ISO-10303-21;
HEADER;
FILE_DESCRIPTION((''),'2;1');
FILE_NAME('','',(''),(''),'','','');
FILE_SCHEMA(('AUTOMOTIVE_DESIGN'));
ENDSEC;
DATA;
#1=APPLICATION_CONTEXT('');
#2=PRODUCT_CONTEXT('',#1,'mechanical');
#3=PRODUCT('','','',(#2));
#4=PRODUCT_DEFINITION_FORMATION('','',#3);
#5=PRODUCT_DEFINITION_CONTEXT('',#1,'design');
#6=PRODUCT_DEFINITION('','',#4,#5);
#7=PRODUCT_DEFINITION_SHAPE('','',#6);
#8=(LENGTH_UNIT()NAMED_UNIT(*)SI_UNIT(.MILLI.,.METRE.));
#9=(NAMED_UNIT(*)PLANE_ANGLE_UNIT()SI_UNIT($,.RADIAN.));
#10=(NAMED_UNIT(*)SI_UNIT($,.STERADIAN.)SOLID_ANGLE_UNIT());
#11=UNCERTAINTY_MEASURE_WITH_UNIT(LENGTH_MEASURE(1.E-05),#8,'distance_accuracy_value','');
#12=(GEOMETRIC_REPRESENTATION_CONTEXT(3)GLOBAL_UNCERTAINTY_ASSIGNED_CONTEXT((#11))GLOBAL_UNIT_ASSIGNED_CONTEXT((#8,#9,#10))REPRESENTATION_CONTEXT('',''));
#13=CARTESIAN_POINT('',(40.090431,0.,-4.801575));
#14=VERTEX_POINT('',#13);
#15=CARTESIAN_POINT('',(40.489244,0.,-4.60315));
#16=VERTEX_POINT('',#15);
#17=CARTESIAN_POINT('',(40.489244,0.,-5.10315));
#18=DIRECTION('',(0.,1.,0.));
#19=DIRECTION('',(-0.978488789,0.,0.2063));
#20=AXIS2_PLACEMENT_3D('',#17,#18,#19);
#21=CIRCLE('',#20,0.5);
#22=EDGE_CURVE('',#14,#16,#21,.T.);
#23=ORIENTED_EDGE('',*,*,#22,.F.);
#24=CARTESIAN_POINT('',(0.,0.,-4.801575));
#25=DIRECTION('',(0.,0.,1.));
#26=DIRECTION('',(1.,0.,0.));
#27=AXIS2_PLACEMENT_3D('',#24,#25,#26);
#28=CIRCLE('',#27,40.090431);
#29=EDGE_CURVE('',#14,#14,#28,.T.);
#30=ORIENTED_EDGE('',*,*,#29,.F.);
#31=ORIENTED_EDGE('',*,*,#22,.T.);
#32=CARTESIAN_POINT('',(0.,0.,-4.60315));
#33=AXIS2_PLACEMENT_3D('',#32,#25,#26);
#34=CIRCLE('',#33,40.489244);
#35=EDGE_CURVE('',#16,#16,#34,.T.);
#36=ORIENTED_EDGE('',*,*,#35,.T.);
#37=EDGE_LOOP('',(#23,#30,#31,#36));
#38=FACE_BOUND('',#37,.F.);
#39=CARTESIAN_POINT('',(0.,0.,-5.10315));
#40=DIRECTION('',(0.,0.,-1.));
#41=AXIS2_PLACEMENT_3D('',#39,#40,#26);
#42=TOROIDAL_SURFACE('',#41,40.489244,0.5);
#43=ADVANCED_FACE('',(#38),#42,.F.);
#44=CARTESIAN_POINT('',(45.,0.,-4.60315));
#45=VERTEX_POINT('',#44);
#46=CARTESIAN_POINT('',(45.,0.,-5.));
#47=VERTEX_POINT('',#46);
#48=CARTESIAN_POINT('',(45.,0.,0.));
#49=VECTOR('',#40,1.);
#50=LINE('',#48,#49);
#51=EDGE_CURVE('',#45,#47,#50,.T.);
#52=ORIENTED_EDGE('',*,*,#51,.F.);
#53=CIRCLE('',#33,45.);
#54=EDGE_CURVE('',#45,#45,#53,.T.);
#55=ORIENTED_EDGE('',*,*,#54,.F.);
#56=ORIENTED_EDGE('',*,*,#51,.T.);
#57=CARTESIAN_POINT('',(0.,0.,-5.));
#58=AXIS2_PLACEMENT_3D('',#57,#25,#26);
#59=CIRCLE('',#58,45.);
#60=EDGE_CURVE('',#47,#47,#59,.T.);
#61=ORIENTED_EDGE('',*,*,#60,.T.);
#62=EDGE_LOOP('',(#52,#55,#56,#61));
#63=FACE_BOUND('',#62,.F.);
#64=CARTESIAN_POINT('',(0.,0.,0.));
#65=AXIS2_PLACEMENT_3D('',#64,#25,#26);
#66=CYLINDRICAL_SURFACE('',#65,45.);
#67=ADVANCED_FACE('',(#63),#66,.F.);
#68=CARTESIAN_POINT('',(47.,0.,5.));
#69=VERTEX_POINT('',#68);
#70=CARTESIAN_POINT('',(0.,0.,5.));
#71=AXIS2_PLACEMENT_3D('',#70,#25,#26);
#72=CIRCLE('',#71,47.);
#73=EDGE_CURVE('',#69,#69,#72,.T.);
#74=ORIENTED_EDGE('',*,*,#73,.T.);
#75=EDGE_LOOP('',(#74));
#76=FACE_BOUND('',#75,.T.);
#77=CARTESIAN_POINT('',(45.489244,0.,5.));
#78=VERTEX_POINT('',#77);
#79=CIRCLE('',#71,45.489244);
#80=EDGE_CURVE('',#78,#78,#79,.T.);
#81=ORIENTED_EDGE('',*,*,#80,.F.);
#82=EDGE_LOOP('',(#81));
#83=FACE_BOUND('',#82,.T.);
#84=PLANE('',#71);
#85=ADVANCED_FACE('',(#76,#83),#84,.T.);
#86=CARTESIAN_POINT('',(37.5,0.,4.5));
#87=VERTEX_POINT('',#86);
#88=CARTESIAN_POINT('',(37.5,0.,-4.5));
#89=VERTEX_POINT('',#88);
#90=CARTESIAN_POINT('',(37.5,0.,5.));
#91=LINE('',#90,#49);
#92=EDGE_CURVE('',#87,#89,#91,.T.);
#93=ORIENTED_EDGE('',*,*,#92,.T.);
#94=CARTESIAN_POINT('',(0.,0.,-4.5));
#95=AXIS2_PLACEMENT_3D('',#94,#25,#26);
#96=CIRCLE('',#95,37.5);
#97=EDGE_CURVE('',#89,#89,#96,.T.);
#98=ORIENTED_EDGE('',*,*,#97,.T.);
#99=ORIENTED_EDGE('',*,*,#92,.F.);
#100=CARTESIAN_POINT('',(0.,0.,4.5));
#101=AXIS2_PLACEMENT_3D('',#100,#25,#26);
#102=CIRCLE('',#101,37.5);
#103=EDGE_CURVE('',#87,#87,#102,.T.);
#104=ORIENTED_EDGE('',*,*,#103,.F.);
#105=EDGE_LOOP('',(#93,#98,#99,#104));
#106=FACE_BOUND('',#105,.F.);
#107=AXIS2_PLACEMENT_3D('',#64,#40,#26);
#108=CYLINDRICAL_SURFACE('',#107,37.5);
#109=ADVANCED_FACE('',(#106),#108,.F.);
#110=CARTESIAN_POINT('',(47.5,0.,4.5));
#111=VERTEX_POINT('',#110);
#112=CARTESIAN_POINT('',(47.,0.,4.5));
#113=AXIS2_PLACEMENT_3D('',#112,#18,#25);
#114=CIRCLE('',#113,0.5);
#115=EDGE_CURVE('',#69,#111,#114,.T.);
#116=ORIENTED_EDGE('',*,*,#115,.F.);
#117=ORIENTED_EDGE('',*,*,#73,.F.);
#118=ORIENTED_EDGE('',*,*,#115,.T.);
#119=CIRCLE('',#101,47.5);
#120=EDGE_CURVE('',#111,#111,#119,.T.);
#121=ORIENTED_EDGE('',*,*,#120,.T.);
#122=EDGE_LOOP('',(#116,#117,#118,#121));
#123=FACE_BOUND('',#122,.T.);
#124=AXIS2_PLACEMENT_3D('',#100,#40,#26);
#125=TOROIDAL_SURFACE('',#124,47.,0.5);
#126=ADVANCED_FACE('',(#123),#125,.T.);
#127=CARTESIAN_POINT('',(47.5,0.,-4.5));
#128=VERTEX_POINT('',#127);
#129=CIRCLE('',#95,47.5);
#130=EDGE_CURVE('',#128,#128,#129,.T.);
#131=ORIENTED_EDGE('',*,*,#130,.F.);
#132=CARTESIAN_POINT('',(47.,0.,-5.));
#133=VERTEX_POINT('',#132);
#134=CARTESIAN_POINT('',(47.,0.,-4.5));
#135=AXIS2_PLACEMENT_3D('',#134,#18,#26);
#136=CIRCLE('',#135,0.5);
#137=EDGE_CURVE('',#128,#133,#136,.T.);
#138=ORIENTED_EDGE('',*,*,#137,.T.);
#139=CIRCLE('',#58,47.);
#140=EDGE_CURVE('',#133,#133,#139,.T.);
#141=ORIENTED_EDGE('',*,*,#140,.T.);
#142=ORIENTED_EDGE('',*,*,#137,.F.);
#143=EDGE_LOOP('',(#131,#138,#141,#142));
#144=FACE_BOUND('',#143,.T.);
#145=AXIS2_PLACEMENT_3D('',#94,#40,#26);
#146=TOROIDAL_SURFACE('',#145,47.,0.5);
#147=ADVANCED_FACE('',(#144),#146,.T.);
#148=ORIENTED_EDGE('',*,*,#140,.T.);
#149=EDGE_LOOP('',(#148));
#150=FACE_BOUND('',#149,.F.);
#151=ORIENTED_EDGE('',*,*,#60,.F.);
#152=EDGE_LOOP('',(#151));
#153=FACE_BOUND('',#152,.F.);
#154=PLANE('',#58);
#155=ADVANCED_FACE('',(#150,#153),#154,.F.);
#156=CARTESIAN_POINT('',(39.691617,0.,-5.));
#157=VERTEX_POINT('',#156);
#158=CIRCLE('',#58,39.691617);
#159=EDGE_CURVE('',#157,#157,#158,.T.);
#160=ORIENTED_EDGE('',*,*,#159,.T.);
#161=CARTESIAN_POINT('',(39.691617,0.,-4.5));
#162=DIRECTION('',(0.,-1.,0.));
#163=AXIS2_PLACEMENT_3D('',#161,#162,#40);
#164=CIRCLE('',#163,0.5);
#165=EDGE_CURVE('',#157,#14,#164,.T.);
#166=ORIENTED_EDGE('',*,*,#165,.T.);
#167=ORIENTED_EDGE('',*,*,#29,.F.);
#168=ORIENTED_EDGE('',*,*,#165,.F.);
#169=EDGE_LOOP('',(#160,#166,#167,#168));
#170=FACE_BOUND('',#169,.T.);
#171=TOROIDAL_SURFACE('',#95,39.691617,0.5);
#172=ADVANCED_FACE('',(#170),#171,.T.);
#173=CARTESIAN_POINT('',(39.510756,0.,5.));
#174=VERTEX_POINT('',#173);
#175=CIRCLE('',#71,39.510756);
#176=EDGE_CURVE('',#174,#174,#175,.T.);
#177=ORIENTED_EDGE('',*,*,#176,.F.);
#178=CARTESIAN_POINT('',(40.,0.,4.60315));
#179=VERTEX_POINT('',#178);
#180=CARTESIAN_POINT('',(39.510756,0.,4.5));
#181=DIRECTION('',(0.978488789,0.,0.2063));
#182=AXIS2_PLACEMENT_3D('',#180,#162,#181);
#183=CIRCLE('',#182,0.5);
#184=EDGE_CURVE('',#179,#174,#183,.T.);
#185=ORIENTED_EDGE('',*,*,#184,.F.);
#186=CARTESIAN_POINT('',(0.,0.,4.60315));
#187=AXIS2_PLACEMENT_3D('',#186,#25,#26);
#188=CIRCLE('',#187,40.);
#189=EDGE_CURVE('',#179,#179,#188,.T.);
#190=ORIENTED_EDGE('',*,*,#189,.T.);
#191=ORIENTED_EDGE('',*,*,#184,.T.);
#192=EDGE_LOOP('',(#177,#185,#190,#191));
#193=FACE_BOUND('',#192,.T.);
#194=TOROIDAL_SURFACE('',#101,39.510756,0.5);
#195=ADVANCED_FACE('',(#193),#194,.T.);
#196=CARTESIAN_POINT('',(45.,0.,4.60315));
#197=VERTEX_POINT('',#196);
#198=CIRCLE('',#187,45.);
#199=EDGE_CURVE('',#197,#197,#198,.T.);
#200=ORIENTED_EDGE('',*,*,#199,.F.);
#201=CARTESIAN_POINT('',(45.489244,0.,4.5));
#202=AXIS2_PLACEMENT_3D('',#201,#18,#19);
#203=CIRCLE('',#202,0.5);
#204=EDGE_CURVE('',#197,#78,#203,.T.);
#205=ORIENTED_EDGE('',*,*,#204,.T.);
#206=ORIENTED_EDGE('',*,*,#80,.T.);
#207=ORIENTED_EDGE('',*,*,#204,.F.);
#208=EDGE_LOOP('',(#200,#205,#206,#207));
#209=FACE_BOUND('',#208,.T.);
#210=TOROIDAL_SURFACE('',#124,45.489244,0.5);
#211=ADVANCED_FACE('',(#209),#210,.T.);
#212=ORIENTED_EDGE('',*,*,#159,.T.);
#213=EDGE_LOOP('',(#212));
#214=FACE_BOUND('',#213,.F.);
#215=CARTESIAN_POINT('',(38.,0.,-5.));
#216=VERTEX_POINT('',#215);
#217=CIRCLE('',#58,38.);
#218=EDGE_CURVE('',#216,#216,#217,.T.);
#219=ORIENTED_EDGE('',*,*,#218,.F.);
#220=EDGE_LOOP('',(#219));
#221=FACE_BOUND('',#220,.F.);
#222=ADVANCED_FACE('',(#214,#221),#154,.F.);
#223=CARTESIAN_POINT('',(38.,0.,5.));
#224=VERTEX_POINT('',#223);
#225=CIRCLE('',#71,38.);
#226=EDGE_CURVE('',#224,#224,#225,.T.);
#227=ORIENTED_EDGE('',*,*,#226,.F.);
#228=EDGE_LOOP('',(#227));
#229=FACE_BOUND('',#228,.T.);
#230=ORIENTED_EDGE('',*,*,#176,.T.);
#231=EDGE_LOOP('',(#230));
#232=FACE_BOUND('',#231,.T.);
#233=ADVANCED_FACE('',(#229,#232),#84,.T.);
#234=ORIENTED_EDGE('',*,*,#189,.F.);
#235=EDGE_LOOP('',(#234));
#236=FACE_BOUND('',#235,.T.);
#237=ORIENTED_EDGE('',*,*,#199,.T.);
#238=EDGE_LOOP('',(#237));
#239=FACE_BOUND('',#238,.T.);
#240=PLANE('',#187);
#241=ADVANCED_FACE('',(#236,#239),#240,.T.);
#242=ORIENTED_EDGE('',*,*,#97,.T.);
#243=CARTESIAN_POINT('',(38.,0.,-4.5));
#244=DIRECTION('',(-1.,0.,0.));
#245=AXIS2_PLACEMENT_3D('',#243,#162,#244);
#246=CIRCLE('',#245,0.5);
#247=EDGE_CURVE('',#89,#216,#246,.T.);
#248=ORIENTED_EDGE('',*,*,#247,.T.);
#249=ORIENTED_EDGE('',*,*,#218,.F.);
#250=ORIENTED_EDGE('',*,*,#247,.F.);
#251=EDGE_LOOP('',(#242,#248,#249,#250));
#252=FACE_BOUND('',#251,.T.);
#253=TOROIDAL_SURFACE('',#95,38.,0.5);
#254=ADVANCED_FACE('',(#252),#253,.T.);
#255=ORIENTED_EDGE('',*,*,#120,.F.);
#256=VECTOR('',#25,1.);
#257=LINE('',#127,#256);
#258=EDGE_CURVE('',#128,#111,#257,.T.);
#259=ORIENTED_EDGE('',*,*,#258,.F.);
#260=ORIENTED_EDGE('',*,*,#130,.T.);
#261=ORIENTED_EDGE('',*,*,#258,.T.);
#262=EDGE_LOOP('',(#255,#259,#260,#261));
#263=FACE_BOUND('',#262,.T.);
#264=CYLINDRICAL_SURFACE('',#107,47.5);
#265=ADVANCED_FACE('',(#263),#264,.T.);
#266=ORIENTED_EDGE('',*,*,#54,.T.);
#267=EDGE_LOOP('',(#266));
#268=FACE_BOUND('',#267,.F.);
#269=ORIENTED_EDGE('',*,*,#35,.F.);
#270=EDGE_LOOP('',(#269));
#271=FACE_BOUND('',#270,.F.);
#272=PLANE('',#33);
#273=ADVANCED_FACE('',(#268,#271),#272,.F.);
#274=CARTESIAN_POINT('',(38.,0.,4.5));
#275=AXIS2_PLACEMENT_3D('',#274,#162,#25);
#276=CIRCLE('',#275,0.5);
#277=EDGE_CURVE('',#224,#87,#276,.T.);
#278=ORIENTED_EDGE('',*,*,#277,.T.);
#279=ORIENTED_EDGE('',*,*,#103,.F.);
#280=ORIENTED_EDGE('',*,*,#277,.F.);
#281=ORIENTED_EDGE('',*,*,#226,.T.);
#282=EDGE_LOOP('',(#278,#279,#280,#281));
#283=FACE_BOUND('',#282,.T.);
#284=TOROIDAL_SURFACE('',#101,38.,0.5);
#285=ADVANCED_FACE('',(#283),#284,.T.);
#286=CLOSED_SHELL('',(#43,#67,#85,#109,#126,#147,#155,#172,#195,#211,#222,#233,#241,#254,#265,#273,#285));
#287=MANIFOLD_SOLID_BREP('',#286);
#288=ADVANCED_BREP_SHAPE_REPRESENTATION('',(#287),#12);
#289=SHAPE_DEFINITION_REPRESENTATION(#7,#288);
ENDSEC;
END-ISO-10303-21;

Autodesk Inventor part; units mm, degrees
ref_plane "YZ Plane" through (0, 0, 0) normal (1, 0, 0) x (0, 1, 0)
ref_plane "XZ Plane" through (0, 0, 0) normal (0, 1, 0) x (-1, 0, 0)
ref_plane "XY Plane" through (0, 0, 0) normal (0, 0, 1) x (1, 0, 0)
sketch "Sketch1" plane through (0, 0, 0) normal (0, 0, 1) x (1, 0, 0)
  circle A0 centre (0, 0) radius 37.5
  circle A1 centre (0, 0) radius 40
  circle A2 centre (0, 0) radius 47.5
  circle A3 centre (0, 0) radius 45
  dimension "d0" = 80
  dimension "d1" = 75
  dimension "d2" = 95
  dimension "d3" = 90
extrude "Extrusion1" add sketch "Sketch1" along normal mid plane 10
extrude "Extrusion2" add sketch "Sketch1" along normal mid plane 9.2063 contours A3
fillet "Fillet1" radius 0.5 8 edges at (-37.5, 0, 5) (-40, 0, 5) (-45, 0, 5) (-47.5, 0, 5) (-37.5, 0, -5) (-40, 0, -4.6031) (-47.5, 0, -5) (-40, 0, -5)
properties part number "6816-2RS"
